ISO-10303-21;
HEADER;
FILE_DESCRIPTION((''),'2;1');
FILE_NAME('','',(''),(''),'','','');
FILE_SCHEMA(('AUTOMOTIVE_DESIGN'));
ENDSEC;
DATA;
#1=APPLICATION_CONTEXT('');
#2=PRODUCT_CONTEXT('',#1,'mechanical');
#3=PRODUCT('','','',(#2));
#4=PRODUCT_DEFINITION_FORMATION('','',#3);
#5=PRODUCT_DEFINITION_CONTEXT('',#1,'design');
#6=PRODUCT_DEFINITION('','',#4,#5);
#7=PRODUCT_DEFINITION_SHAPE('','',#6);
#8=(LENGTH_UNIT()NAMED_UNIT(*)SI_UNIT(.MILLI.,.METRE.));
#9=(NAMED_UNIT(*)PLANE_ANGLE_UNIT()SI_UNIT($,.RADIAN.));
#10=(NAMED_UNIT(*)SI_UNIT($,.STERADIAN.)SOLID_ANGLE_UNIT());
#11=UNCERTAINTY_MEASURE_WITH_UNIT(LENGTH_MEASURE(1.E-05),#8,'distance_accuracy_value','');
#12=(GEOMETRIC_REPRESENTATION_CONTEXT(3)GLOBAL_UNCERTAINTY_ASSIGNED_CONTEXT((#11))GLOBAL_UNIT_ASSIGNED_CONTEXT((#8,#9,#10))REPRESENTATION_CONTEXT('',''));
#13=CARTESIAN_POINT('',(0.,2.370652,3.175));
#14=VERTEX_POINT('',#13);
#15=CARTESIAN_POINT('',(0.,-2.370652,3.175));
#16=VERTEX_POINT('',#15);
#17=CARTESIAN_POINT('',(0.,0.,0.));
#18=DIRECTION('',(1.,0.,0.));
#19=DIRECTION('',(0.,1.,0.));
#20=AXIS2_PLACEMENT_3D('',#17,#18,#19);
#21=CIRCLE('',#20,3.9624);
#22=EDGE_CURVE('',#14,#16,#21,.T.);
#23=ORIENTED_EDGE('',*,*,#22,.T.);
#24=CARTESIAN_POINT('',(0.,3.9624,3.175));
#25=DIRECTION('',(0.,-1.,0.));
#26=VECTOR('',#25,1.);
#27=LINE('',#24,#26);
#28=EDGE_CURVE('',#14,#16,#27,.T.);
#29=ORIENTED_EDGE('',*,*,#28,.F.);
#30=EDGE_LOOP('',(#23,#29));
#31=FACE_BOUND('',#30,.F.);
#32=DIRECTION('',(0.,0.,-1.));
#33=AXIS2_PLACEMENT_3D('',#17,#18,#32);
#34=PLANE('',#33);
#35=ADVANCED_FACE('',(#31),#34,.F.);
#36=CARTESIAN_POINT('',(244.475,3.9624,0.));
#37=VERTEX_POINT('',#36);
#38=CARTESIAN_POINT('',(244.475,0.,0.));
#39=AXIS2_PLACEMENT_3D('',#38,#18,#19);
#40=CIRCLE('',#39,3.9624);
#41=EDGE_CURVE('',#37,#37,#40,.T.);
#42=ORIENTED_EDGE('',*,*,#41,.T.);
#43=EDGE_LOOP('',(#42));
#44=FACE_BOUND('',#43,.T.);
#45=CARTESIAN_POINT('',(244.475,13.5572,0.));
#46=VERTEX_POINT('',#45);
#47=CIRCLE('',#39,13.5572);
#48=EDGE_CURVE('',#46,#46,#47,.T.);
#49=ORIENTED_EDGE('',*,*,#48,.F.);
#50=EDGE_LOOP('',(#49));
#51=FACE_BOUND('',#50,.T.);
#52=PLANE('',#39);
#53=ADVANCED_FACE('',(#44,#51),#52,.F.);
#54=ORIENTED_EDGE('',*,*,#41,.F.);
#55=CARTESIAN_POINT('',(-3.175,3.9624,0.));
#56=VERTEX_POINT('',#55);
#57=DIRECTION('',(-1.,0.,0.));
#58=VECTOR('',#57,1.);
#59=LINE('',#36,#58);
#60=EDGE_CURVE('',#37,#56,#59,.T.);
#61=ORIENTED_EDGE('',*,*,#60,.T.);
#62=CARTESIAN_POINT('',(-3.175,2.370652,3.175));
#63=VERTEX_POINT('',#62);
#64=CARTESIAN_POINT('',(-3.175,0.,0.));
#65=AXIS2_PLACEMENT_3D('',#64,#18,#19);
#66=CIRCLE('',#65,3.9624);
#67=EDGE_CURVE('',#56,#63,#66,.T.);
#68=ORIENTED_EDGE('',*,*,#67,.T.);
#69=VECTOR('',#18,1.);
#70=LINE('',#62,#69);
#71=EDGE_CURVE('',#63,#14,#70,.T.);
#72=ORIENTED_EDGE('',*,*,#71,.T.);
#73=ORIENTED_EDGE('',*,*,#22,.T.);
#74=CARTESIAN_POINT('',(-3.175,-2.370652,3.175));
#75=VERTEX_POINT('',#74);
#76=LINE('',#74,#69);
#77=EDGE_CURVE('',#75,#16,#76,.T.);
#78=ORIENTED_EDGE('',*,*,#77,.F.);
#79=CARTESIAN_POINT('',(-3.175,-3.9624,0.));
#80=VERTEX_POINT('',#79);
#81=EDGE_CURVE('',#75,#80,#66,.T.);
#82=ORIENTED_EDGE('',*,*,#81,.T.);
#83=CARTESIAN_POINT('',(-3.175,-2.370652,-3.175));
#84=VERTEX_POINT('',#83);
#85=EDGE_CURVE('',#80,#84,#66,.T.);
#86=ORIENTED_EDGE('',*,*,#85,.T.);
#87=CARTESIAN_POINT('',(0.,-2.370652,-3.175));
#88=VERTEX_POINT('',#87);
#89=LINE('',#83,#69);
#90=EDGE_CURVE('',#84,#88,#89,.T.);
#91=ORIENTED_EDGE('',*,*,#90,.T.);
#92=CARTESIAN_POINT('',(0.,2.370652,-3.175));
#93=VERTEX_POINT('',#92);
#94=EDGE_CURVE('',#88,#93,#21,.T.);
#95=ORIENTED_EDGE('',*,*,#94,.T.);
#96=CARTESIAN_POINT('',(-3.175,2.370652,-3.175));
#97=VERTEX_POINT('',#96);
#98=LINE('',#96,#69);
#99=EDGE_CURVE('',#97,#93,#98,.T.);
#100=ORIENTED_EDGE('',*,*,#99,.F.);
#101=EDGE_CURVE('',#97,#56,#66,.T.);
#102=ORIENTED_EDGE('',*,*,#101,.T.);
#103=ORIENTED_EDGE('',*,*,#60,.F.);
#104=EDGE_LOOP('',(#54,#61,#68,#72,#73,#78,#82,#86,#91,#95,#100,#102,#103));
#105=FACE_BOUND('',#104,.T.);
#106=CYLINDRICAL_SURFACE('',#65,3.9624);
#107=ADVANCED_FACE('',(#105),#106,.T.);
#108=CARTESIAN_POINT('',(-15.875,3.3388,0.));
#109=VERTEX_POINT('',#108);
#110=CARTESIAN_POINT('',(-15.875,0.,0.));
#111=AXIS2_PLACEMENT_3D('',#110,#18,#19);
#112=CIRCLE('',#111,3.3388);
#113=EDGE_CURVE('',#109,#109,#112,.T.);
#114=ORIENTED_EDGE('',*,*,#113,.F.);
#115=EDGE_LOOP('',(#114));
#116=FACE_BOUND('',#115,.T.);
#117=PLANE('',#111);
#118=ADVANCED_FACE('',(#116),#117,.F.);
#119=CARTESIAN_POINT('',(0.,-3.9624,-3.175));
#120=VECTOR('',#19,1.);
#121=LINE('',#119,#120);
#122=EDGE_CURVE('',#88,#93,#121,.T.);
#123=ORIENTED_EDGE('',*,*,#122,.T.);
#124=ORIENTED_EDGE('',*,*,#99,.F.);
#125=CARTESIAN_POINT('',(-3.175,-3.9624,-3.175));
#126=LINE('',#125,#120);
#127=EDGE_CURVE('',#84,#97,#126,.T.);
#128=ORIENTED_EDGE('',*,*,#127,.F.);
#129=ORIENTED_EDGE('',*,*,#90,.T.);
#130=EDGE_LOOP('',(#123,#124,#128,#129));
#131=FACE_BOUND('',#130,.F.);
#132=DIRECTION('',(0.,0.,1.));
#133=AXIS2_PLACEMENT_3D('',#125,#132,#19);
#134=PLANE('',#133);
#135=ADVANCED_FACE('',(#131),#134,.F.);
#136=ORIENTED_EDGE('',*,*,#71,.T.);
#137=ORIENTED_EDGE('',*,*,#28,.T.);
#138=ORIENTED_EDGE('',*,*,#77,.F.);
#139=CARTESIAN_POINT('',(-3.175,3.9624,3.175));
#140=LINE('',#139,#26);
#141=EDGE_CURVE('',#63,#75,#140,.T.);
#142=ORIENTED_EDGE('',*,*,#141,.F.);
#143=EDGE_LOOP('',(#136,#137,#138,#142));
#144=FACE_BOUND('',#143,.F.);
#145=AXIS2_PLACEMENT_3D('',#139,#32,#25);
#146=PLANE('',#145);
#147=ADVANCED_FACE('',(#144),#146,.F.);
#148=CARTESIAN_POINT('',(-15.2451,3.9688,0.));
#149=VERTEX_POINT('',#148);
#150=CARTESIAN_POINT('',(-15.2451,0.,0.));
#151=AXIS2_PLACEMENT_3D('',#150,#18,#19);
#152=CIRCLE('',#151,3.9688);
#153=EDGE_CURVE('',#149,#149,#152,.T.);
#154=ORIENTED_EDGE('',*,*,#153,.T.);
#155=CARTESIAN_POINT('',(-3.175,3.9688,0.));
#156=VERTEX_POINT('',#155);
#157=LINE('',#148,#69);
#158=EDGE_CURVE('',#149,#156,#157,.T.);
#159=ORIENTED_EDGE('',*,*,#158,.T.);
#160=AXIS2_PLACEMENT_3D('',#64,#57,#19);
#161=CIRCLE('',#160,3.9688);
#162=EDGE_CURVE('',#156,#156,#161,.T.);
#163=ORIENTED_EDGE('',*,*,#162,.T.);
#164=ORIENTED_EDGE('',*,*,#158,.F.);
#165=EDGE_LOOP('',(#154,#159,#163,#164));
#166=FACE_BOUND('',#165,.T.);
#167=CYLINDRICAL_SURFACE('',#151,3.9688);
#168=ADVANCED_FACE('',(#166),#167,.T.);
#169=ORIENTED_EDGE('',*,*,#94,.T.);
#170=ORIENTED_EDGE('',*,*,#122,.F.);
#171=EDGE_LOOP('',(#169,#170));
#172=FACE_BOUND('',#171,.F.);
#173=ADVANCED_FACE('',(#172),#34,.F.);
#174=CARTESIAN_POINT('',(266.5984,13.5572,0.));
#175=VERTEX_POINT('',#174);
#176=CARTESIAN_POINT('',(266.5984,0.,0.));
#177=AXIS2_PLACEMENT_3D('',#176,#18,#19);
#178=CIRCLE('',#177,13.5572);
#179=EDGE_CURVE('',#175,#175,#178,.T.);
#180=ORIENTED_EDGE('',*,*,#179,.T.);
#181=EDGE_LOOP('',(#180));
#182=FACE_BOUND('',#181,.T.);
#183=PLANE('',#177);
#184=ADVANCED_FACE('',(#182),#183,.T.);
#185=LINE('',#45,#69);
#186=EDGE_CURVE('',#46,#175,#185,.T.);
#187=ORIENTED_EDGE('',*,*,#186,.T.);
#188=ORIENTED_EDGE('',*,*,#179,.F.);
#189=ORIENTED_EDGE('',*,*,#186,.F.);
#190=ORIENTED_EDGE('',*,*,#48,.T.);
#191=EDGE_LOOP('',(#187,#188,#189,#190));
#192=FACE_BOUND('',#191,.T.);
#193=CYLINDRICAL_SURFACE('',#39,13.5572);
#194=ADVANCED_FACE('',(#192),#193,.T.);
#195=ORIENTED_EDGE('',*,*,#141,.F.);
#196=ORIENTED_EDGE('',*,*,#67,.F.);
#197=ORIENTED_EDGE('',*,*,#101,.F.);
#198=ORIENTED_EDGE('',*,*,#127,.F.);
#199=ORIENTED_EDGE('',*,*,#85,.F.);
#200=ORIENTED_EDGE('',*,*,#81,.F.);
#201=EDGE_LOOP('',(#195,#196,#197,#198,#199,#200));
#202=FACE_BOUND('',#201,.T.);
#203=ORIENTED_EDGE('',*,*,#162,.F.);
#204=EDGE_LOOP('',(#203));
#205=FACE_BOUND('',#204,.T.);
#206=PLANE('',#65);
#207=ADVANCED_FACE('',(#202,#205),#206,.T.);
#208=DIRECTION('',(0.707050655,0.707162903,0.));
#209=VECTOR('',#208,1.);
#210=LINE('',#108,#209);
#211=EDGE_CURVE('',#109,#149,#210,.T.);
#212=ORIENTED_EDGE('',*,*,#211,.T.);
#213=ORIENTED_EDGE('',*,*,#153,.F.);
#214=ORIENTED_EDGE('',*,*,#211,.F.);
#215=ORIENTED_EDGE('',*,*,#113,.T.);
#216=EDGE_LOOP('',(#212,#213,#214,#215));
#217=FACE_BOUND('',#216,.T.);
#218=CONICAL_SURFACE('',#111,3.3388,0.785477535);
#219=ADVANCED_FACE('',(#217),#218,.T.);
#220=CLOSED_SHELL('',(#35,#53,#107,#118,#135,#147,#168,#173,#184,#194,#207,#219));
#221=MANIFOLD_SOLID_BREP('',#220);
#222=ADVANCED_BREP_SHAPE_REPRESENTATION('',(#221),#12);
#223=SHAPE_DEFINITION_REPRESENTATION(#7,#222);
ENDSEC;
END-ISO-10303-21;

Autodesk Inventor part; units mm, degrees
sketch "Sketch_1" plane through (0, 0, 0) normal (0, 0, 1) x (1, 0, 0)
  line L0 (266.5984, 0) -> (-3.175, 0)
  line L1 (-3.175, 0) -> (-3.175, 3.9624)
  line L2 (-3.175, 3.9624) -> (244.475, 3.9624)
  line L3 (244.475, 3.9624) -> (244.475, 13.5572)
  line L4 (244.475, 13.5572) -> (266.5984, 13.5572)
  line L5 (266.5984, 13.5572) -> (266.5984, 0)
  line L6 (266.5984, 0) -> (-3.175, 0)
revolve "Revolution1" add sketch "Sketch_1" angle 360 about axis through (266.5984, 0, 0) along (1, 0, 0)
sketch "Sketch_3" plane through (0, 0, 0) normal (0, 0, 1) x (1, 0, 0)
  line L0 (-3.175, 0) -> (-15.875, 0)
  line L1 (-15.875, 0) -> (-15.875, 3.3388)
  line L2 (-15.875, 3.3388) -> (-15.2451, 3.9688)
  line L3 (-15.2451, 3.9688) -> (-3.175, 3.9688)
  line L4 (-3.175, 3.9688) -> (-3.175, 0)
  line L5 (-3.175, 0) -> (-15.875, 0)
revolve "Revolution2" add sketch "Sketch_3" angle 360 about axis through (-3.175, 0, 0) along (1, 0, 0)
thread "Thread1" size "5/16-24 UNF" class "2A" standard "ANSI Unified Screw Threads" full length
sketch "Sketch_10" plane through (-3.175, 0, 0) normal (1, 0, 0) x (0, 0, -1)
  line L0 (-7.9248, 7.9248) -> (-7.9248, -7.9248)
  line L1 (-7.9248, -7.9248) -> (7.9248, -7.9248)
  line L2 (7.9248, -7.9248) -> (7.9248, 7.9248)
  line L3 (7.9248, 7.9248) -> (-7.9248, 7.9248)
  line L4 (-3.175, 3.9624) -> (-3.175, -3.9624)
  line L5 (-3.175, -3.9624) -> (3.175, -3.9624)
  line L6 (3.175, -3.9624) -> (3.175, 3.9624)
  line L7 (3.175, 3.9624) -> (-3.175, 3.9624)
extrude "Extrusion1" cut sketch "Sketch_10" along normal blind 3.175
ref_plane "dia1_XY" through (-3.175, 3.9624, 0) normal (1, 0, 0) x (0, 0, -1)
ref_plane "dia1_YZ" through (-3.175, 3.9624, 0) normal (0, 0, -1) x (0, 1, 0)
ref_plane "dia1_ZX" through (-3.175, 3.9624, 0) normal (0, 1, 0) x (1, 0, 0)
ref_plane "dia12_XY" through (0, 0, 14.1351) normal (1, 0, 0) x (0, 0, -1)
ref_plane "dia12_YZ" through (0, 0, 14.1351) normal (0, 0, -1) x (0, 1, 0)
ref_plane "dia12_ZX" through (0, 0, 14.1351) normal (0, 1, 0) x (1, 0, 0)
ref_plane "dia2_XY" through (-3.175, -3.9624, 0) normal (1, 0, 0) x (0, 0, -1)
ref_plane "dia2_YZ" through (-3.175, -3.9624, 0) normal (0, 0, -1) x (0, 1, 0)
ref_plane "dia2_ZX" through (-3.175, -3.9624, 0) normal (0, 1, 0) x (1, 0, 0)
ref_plane "dia22_XY" through (0, 0, -14.1351) normal (1, 0, 0) x (0, 0, -1)
ref_plane "dia22_YZ" through (0, 0, -14.1351) normal (0, 0, -1) x (0, 1, 0)
ref_plane "dia22_ZX" through (0, 0, -14.1351) normal (0, 1, 0) x (1, 0, 0)
ref_plane "rl1_XY" through (-15.875, 0, 0) normal (1, 0, 0) x (0, 0, -1)
ref_plane "rl1_YZ" through (-15.875, 0, 0) normal (0, 0, -1) x (0, 1, 0)
ref_plane "rl1_ZX" through (-15.875, 0, 0) normal (0, 1, 0) x (1, 0, 0)
ref_plane "rl2_XY" through (-3.175, 0, 0) normal (1, 0, 0) x (0, 0, -1)
ref_plane "rl2_YZ" through (-3.175, 0, 0) normal (0, 0, -1) x (0, 1, 0)
ref_plane "rl2_ZX" through (-3.175, 0, 0) normal (0, 1, 0) x (1, 0, 0)
ref_plane "rod_cp_XY" through (0, 0, 0) normal (1, 0, 0) x (0, 0, -1)
ref_plane "rod_cp_YZ" through (0, 0, 0) normal (0, 0, -1) x (0, 1, 0)
ref_plane "rod_cp_ZX" through (0, 0, 0) normal (0, 1, 0) x (1, 0, 0)
ref_plane "thd1_XY" through (-15.875, 3.9688, 0) normal (1, 0, 0) x (0, 0, -1)
ref_plane "thd1_YZ" through (-15.875, 3.9688, 0) normal (0, 0, -1) x (0, 1, 0)
ref_plane "thd1_ZX" through (-15.875, 3.9688, 0) normal (0, 1, 0) x (1, 0, 0)
ref_plane "thd2_XY" through (-15.875, -3.9688, 0) normal (1, 0, 0) x (0, 0, -1)
ref_plane "thd2_YZ" through (-15.875, -3.9688, 0) normal (0, 0, -1) x (0, 1, 0)
ref_plane "thd2_ZX" through (-15.875, -3.9688, 0) normal (0, 1, 0) x (1, 0, 0)
ref_plane "to_rod_clevis_XY" through (-20.701, 0, 0) normal (1, 0, 0) x (0, 0, -1)
ref_plane "to_rod_clevis_YZ" through (-20.701, 0, 0) normal (0, 0, -1) x (0, 1, 0)
ref_plane "to_rod_clevis_ZX" through (-20.701, 0, 0) normal (0, 1, 0) x (1, 0, 0)
ref_plane "wf1_XY" through (-3.175, 0, 0) normal (1, 0, 0) x (0, 0, -1)
ref_plane "wf1_YZ" through (-3.175, 0, 0) normal (0, 0, -1) x (0, 1, 0)
ref_plane "wf1_ZX" through (-3.175, 0, 0) normal (0, 1, 0) x (1, 0, 0)
ref_plane "wf2_XY" through (0, 0, 0) normal (1, 0, 0) x (0, 0, -1)
ref_plane "wf2_YZ" through (0, 0, 0) normal (0, 0, -1) x (0, 1, 0)
ref_plane "wf2_ZX" through (0, 0, 0) normal (0, 1, 0) x (1, 0, 0)
ref_plane "wfw1_XY" through (-3.175, 0, -3.175) normal (0, 1, 0) x (1, 0, 0)
ref_plane "wfw1_YZ" through (-3.175, 0, -3.175) normal (1, 0, 0) x (0, 0, -1)
ref_plane "wfw1_ZX" through (-3.175, 0, -3.175) normal (0, 0, -1) x (0, 1, 0)
ref_plane "wfw2_XY" through (-3.175, 0, 3.175) normal (0, 1, 0) x (1, 0, 0)
ref_plane "wfw2_YZ" through (-3.175, 0, 3.175) normal (1, 0, 0) x (0, 0, -1)
ref_plane "wfw2_ZX" through (-3.175, 0, 3.175) normal (0, 0, -1) x (0, 1, 0)
properties part number "C-098-DP0_rod"
